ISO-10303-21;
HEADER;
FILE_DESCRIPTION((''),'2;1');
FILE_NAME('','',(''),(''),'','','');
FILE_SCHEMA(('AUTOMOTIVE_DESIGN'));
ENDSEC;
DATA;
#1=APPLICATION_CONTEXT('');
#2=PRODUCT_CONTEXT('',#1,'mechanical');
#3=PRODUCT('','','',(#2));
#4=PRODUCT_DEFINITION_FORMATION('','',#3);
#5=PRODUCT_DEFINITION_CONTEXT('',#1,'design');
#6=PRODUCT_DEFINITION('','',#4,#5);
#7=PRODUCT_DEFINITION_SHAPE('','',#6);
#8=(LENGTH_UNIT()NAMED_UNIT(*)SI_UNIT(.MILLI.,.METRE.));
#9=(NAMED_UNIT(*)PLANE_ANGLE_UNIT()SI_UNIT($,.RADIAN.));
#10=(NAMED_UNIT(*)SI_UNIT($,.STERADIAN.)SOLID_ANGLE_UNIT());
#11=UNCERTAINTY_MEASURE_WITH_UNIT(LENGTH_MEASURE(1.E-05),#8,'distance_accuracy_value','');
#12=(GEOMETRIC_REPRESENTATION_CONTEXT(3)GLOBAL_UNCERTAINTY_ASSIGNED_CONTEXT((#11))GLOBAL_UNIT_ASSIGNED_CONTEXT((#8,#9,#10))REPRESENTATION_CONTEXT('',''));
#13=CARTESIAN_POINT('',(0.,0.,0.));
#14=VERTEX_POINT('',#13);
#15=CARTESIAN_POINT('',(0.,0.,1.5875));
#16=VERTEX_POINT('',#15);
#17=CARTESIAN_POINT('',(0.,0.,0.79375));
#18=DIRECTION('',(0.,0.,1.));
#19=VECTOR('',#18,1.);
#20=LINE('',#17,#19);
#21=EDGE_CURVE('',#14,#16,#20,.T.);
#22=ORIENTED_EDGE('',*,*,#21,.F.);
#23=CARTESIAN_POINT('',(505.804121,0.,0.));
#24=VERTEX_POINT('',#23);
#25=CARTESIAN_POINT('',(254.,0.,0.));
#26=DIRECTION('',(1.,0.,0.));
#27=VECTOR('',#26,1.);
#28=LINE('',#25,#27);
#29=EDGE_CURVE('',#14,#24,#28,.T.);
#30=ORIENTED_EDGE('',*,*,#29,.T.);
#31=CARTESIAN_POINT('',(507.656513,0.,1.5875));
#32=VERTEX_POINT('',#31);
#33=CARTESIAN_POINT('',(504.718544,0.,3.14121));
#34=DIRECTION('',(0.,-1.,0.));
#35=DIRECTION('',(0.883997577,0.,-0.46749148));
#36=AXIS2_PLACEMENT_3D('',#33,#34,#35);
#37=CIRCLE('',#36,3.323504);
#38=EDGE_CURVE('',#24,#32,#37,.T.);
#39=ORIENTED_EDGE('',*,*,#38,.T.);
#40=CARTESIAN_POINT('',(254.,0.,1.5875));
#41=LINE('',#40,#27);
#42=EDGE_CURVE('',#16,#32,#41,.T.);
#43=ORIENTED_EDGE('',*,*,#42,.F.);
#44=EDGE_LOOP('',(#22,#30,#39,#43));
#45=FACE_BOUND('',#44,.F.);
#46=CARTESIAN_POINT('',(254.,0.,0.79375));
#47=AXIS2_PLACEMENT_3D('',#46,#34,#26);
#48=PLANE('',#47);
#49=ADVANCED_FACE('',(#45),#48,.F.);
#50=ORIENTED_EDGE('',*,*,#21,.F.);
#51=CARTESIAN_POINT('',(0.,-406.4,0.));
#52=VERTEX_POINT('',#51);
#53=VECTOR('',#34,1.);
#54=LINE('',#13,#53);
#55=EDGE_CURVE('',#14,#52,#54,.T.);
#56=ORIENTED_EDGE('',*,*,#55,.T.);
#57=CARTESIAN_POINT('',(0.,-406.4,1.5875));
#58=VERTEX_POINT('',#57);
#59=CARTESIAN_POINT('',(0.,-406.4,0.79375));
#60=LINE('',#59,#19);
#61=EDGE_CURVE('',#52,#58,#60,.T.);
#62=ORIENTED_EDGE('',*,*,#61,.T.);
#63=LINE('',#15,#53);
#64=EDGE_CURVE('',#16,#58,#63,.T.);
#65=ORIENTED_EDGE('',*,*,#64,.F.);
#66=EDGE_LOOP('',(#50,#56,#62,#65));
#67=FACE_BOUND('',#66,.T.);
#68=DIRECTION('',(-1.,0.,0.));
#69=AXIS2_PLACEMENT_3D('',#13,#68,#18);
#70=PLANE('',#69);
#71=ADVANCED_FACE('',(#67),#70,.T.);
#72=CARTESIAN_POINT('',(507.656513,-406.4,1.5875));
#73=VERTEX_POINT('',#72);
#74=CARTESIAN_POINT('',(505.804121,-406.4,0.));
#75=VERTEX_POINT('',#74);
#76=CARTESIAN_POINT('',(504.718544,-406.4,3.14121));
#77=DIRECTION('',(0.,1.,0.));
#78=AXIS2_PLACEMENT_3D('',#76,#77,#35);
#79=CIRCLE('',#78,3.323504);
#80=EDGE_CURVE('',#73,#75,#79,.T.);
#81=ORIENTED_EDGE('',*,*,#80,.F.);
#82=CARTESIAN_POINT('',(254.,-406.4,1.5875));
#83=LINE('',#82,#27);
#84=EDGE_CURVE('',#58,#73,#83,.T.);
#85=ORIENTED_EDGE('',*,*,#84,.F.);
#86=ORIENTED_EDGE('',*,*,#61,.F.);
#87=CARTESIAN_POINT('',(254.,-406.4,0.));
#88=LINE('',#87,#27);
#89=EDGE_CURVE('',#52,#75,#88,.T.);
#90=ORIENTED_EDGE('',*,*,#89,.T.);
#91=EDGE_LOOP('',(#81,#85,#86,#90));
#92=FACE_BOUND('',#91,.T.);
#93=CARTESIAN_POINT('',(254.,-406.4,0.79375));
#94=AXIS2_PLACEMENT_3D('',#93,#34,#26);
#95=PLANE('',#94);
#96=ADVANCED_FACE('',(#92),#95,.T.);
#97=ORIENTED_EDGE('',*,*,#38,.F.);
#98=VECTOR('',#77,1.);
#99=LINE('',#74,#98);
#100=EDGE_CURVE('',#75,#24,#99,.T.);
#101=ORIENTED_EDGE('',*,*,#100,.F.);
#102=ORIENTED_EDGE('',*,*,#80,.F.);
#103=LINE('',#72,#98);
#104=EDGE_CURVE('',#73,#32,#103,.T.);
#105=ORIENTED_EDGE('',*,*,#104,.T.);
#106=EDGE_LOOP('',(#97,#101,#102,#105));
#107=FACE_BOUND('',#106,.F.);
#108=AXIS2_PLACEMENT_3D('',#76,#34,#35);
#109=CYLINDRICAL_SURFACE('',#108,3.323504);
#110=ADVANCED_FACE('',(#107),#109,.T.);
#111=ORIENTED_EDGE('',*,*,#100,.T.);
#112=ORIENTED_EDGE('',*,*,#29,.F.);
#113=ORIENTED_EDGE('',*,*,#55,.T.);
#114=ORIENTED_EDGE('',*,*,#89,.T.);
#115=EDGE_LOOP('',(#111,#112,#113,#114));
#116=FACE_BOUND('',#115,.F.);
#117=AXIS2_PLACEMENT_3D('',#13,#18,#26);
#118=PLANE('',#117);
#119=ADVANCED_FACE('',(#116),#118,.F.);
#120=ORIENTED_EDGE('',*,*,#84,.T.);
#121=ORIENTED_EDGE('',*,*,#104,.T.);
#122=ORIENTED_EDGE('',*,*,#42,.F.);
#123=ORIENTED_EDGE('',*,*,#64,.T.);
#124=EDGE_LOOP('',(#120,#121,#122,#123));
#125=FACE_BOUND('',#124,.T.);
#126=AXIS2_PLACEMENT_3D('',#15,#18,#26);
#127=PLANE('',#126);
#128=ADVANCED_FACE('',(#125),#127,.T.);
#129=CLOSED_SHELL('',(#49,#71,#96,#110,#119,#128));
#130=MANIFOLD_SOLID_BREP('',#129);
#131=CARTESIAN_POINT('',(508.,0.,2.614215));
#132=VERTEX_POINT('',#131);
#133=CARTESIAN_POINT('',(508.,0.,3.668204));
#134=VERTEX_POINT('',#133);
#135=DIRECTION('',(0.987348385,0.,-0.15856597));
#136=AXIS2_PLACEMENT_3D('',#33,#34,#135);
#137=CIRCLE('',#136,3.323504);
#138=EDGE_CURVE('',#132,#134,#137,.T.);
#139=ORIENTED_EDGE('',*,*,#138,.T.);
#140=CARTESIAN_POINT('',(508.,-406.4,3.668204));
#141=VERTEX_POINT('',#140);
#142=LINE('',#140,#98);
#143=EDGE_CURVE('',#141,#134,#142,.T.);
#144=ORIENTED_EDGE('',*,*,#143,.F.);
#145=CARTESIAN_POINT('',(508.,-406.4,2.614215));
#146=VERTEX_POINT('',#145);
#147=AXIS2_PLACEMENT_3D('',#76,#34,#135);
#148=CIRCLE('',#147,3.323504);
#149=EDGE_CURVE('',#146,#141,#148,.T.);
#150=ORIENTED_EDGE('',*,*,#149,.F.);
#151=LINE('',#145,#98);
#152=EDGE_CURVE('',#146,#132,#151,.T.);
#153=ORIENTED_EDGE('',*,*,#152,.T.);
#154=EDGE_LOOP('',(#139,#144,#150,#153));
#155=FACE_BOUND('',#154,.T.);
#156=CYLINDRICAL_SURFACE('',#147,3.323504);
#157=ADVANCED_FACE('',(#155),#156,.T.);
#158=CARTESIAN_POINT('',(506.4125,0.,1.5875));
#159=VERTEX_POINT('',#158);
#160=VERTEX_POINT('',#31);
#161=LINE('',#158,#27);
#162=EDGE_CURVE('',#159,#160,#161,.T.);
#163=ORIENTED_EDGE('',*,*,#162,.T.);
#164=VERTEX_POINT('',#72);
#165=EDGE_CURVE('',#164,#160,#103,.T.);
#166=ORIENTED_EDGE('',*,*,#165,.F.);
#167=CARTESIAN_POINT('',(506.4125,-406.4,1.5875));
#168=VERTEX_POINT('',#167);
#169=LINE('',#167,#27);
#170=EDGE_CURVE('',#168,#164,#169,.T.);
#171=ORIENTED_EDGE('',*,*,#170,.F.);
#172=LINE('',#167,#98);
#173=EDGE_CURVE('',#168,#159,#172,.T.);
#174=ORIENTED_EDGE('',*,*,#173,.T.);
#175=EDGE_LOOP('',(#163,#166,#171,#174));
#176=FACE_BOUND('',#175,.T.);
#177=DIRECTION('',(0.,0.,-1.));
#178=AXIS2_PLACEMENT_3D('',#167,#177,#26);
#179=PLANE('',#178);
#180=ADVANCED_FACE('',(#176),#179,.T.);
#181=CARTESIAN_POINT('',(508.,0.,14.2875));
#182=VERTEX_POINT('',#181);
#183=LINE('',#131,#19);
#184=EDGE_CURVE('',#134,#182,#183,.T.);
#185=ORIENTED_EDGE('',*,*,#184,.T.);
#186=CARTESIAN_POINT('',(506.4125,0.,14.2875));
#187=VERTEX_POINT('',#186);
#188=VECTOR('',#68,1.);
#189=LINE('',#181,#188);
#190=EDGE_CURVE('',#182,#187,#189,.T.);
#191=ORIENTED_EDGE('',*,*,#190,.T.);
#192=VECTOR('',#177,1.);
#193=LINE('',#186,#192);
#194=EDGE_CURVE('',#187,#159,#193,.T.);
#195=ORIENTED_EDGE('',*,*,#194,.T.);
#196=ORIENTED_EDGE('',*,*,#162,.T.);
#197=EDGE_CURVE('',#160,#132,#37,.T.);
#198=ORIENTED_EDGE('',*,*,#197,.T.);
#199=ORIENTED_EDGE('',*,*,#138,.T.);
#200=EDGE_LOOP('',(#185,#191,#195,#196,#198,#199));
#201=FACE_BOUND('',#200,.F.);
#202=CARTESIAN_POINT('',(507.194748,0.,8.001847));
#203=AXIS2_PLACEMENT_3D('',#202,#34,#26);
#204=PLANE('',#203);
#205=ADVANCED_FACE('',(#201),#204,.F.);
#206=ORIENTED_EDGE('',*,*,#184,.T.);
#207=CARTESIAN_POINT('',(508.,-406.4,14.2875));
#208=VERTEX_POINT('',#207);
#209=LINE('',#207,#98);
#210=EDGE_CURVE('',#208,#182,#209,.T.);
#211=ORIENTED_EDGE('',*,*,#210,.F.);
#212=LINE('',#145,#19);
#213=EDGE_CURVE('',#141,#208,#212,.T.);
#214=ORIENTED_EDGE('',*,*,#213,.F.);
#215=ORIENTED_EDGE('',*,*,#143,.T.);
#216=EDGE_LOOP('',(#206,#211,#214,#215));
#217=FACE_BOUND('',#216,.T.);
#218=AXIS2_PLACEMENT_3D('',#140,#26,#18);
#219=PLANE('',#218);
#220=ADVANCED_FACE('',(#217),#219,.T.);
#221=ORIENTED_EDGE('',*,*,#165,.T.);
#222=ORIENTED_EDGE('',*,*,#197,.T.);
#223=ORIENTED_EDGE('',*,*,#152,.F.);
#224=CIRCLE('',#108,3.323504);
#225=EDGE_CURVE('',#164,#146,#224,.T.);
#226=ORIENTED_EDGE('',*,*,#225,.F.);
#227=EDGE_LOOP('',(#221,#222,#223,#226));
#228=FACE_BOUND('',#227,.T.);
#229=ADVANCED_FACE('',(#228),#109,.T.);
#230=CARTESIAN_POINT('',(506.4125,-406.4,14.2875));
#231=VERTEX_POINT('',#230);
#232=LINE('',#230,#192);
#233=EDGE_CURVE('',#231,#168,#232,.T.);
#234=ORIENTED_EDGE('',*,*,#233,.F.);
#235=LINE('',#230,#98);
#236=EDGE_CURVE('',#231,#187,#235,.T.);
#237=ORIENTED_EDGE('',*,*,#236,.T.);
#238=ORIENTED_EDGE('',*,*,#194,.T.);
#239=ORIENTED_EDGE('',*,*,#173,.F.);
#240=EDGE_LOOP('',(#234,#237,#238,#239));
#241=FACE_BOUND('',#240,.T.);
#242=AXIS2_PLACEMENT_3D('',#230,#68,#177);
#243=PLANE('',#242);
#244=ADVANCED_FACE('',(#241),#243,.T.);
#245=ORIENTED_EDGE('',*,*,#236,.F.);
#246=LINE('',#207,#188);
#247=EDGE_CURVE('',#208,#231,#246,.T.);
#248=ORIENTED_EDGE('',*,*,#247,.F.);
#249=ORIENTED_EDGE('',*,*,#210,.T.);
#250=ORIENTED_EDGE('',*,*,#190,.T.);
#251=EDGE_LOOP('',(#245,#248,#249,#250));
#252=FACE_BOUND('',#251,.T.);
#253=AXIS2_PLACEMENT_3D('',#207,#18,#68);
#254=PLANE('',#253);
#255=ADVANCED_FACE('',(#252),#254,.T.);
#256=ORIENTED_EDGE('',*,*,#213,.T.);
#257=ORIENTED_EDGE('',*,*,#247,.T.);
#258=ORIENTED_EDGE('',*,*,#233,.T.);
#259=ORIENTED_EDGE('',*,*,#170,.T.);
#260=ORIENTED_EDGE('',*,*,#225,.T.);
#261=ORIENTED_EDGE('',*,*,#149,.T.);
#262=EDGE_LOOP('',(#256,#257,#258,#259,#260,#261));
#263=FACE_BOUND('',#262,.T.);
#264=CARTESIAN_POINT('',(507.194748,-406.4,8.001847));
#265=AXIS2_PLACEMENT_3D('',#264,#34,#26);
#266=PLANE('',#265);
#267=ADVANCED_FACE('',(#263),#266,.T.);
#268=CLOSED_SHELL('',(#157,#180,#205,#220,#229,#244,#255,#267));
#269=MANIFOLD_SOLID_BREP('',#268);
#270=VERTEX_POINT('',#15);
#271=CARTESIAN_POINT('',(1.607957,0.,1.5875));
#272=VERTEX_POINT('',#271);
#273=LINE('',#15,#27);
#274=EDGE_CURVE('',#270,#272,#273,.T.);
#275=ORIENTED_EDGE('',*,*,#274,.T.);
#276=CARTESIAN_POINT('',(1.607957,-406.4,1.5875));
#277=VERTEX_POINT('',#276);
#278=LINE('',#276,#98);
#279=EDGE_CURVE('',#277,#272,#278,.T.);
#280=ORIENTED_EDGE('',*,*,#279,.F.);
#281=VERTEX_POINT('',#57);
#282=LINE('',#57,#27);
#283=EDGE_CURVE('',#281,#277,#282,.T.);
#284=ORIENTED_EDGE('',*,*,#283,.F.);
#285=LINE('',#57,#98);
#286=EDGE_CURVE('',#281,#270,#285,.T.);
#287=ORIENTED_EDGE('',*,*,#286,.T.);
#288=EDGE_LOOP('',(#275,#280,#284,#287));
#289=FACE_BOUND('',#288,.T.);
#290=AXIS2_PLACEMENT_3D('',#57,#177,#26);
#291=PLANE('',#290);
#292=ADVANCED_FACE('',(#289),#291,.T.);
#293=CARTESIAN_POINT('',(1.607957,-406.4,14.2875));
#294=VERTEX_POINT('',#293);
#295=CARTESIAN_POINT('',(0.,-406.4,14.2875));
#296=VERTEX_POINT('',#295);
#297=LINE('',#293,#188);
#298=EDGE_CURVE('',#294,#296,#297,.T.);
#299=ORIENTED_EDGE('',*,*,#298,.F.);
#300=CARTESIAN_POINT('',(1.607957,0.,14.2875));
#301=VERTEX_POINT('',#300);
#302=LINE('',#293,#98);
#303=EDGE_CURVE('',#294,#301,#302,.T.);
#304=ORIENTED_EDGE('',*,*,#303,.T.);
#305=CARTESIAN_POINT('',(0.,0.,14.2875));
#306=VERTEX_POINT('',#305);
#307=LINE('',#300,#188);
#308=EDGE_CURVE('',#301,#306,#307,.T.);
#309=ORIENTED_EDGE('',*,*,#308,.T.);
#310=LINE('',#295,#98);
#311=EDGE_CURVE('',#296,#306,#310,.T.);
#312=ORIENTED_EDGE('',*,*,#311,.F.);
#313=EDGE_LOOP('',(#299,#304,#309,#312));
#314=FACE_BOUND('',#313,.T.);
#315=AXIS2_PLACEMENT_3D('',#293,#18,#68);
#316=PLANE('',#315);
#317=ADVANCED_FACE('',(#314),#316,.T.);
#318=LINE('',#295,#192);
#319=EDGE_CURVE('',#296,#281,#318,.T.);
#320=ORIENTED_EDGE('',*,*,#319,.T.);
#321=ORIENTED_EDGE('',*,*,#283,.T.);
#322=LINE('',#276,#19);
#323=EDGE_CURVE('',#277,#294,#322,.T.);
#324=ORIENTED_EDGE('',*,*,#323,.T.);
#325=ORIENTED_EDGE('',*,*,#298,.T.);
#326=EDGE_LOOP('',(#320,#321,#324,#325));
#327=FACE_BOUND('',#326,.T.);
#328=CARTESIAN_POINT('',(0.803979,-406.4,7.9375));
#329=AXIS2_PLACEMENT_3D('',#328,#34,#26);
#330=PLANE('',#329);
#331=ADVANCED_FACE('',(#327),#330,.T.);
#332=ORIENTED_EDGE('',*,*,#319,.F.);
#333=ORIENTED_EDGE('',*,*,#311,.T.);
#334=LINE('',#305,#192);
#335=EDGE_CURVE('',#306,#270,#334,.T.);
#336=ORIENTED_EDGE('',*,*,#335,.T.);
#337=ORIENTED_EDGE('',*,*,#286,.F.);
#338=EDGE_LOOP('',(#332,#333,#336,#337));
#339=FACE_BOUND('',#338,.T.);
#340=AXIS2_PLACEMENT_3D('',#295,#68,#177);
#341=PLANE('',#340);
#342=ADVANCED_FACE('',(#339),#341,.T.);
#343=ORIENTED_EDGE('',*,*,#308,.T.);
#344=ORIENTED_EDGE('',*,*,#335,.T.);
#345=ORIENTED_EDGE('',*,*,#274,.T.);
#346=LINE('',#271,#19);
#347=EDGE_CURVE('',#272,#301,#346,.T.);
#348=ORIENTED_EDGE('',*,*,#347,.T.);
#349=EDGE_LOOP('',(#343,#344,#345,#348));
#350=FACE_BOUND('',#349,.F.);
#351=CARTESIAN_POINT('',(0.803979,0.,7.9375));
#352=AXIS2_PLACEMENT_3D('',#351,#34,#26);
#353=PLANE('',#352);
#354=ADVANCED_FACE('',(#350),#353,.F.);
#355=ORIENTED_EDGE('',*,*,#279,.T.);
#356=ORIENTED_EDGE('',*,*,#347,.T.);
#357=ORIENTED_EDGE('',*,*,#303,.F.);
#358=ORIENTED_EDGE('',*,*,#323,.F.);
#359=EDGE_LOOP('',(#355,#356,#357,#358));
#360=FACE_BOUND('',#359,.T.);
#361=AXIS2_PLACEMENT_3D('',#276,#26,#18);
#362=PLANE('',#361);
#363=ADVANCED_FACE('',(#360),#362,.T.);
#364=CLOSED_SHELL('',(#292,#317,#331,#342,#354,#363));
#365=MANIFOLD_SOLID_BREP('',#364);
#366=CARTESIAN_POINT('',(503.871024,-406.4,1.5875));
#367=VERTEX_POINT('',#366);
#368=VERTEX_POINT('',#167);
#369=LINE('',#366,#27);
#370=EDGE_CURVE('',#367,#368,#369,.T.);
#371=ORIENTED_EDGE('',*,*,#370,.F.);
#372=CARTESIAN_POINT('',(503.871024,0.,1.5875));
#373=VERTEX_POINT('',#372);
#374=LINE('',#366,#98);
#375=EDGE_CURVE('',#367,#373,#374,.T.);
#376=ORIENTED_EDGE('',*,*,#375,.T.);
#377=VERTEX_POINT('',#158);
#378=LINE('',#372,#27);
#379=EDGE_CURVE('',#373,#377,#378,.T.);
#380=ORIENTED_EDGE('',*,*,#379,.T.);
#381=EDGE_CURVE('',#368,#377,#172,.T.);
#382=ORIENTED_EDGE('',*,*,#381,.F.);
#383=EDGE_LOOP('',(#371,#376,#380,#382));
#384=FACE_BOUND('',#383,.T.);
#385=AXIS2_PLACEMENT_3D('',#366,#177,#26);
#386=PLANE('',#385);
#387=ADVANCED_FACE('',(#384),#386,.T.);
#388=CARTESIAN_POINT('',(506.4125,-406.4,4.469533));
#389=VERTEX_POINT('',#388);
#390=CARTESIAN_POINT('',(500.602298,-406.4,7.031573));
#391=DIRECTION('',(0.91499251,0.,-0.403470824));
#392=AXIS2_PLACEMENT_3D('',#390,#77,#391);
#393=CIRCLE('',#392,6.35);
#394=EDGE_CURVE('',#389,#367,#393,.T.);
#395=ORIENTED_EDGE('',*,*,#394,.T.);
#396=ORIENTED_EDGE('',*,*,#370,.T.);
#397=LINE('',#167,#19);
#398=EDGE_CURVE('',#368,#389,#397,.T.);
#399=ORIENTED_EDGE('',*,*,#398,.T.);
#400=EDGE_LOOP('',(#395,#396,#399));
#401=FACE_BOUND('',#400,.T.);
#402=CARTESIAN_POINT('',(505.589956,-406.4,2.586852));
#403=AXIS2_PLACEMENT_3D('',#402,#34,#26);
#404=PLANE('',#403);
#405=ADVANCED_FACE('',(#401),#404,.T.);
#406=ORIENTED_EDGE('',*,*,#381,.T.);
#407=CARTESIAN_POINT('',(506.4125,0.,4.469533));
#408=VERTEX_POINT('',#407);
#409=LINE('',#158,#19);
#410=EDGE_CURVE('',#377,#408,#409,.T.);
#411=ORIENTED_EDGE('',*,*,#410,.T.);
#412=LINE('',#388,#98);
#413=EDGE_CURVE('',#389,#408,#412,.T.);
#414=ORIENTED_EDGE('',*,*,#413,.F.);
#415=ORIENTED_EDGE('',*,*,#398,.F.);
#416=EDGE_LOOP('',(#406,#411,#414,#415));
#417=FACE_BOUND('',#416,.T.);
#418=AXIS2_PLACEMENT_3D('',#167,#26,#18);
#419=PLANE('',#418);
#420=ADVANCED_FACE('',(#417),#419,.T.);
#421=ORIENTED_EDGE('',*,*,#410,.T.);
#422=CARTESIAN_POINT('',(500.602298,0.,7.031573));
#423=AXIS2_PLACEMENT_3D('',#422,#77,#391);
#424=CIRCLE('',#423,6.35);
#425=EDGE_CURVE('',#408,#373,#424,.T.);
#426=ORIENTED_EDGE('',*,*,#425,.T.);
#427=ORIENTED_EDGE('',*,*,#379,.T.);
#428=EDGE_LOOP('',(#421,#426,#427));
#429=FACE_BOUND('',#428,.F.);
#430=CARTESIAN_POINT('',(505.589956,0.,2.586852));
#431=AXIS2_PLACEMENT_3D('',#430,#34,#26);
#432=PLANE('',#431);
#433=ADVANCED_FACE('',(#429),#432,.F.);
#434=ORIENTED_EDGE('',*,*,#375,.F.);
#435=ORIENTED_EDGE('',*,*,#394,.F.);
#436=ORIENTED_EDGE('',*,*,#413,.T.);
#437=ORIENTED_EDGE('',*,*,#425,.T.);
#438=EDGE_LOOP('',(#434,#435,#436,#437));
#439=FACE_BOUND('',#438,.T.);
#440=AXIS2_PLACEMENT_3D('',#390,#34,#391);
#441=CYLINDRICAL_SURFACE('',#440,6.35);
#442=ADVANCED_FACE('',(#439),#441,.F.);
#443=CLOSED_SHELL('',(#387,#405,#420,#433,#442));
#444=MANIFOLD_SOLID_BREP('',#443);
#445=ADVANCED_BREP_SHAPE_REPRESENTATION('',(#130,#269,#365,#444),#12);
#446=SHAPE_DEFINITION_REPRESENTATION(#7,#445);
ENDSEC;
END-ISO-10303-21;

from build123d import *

# Parameters (mm, degrees)
F0_W     = 508
F0_H     = 1.5875
F1_DEPTH = 406.4
F4_DEPTH = 406.4
F5_DEPTH = 406.4
F6_DEPTH = 406.401


# Not quite as in the source:
# - a feature of the source that left no trace in its solid (it failed there, or was rolled back) is left out


with BuildPart() as f1:
    # F0 (on Front) → F1 (new body)
    with BuildSketch(Plane.XZ):
        with Locations((254, 0.79375)):
            Rectangle(F0_W, F0_H)
    extrude(amount=F1_DEPTH)

    # F2 (on face) → F6 (cut, through all)
    with BuildSketch(Plane.XZ.offset(406.4)):
        with BuildLine():
            ThreePointArc((507.6565132189, 1.5875), (506.8812439632, 0.6176396397), (505.8041214943, 0))
            Line((505.8041214943, 0), (508, 0))
            Line((508, 0), (508, 1.5875))
            Line((508, 1.5875), (507.6565132189, 1.5875))
        make_face()
        with BuildLine():
            Line((508, 3.6682041828), (508, 2.6142150412))
            ThreePointArc((508, 2.6142150412), (508.0420476883, 3.141209612), (508, 3.6682041828))
        make_face()
    extrude(amount=-F6_DEPTH, mode=Mode.SUBTRACT)


with BuildPart() as f4:
    # F2 (on face) → F4 (new body)
    with BuildSketch(Plane.XZ.offset(406.4)):
        Polygon((0, 9.3688843772), (0, 1.5875), (1.6079572961, 1.5875), (1.6079572961, 14.2875), (0, 14.2875), (0, 9.9055850878), align=None)
    extrude(amount=-F4_DEPTH)


with BuildPart() as f4b:
    # F2 (on face) → F4, piece 2 (new body)
    with BuildSketch(Plane.XZ.offset(406.4)):
        with BuildLine():
            Line((506.4125, 14.2875), (506.4125, 4.4695332181))
            Line((506.4125, 4.4695332181), (506.4125, 1.5875))
            Line((506.4125, 1.5875), (507.6565132189, 1.5875))
            ThreePointArc((507.6565132189, 1.5875), (507.870344829, 2.0867769369), (508, 2.6142150412))
            Line((508, 2.6142150412), (508, 3.6682041828))
            Line((508, 3.6682041828), (508, 14.2875))
            Line((508, 14.2875), (506.4125, 14.2875))
        make_face()
        with BuildLine():
            Line((508, 3.6682041828), (508, 2.6142150412))
            ThreePointArc((508, 2.6142150412), (508.0420476883, 3.141209612), (508, 3.6682041828))
        make_face()
    extrude(amount=-F4_DEPTH)


with BuildPart() as f5:
    # F2 (on face) → F5 (new body)
    with BuildSketch(Plane.XZ.offset(406.4)):
        with BuildLine():
            ThreePointArc((506.4125, 4.4695332181), (505.364992625, 2.8316639404), (503.8710235621, 1.5875))
            Line((503.8710235621, 1.5875), (506.4125, 1.5875))
            Line((506.4125, 1.5875), (506.4125, 4.4695332181))
        make_face()
    extrude(amount=-F5_DEPTH)


solid = Compound([f1.part, f4.part, f4b.part, f5.part])
